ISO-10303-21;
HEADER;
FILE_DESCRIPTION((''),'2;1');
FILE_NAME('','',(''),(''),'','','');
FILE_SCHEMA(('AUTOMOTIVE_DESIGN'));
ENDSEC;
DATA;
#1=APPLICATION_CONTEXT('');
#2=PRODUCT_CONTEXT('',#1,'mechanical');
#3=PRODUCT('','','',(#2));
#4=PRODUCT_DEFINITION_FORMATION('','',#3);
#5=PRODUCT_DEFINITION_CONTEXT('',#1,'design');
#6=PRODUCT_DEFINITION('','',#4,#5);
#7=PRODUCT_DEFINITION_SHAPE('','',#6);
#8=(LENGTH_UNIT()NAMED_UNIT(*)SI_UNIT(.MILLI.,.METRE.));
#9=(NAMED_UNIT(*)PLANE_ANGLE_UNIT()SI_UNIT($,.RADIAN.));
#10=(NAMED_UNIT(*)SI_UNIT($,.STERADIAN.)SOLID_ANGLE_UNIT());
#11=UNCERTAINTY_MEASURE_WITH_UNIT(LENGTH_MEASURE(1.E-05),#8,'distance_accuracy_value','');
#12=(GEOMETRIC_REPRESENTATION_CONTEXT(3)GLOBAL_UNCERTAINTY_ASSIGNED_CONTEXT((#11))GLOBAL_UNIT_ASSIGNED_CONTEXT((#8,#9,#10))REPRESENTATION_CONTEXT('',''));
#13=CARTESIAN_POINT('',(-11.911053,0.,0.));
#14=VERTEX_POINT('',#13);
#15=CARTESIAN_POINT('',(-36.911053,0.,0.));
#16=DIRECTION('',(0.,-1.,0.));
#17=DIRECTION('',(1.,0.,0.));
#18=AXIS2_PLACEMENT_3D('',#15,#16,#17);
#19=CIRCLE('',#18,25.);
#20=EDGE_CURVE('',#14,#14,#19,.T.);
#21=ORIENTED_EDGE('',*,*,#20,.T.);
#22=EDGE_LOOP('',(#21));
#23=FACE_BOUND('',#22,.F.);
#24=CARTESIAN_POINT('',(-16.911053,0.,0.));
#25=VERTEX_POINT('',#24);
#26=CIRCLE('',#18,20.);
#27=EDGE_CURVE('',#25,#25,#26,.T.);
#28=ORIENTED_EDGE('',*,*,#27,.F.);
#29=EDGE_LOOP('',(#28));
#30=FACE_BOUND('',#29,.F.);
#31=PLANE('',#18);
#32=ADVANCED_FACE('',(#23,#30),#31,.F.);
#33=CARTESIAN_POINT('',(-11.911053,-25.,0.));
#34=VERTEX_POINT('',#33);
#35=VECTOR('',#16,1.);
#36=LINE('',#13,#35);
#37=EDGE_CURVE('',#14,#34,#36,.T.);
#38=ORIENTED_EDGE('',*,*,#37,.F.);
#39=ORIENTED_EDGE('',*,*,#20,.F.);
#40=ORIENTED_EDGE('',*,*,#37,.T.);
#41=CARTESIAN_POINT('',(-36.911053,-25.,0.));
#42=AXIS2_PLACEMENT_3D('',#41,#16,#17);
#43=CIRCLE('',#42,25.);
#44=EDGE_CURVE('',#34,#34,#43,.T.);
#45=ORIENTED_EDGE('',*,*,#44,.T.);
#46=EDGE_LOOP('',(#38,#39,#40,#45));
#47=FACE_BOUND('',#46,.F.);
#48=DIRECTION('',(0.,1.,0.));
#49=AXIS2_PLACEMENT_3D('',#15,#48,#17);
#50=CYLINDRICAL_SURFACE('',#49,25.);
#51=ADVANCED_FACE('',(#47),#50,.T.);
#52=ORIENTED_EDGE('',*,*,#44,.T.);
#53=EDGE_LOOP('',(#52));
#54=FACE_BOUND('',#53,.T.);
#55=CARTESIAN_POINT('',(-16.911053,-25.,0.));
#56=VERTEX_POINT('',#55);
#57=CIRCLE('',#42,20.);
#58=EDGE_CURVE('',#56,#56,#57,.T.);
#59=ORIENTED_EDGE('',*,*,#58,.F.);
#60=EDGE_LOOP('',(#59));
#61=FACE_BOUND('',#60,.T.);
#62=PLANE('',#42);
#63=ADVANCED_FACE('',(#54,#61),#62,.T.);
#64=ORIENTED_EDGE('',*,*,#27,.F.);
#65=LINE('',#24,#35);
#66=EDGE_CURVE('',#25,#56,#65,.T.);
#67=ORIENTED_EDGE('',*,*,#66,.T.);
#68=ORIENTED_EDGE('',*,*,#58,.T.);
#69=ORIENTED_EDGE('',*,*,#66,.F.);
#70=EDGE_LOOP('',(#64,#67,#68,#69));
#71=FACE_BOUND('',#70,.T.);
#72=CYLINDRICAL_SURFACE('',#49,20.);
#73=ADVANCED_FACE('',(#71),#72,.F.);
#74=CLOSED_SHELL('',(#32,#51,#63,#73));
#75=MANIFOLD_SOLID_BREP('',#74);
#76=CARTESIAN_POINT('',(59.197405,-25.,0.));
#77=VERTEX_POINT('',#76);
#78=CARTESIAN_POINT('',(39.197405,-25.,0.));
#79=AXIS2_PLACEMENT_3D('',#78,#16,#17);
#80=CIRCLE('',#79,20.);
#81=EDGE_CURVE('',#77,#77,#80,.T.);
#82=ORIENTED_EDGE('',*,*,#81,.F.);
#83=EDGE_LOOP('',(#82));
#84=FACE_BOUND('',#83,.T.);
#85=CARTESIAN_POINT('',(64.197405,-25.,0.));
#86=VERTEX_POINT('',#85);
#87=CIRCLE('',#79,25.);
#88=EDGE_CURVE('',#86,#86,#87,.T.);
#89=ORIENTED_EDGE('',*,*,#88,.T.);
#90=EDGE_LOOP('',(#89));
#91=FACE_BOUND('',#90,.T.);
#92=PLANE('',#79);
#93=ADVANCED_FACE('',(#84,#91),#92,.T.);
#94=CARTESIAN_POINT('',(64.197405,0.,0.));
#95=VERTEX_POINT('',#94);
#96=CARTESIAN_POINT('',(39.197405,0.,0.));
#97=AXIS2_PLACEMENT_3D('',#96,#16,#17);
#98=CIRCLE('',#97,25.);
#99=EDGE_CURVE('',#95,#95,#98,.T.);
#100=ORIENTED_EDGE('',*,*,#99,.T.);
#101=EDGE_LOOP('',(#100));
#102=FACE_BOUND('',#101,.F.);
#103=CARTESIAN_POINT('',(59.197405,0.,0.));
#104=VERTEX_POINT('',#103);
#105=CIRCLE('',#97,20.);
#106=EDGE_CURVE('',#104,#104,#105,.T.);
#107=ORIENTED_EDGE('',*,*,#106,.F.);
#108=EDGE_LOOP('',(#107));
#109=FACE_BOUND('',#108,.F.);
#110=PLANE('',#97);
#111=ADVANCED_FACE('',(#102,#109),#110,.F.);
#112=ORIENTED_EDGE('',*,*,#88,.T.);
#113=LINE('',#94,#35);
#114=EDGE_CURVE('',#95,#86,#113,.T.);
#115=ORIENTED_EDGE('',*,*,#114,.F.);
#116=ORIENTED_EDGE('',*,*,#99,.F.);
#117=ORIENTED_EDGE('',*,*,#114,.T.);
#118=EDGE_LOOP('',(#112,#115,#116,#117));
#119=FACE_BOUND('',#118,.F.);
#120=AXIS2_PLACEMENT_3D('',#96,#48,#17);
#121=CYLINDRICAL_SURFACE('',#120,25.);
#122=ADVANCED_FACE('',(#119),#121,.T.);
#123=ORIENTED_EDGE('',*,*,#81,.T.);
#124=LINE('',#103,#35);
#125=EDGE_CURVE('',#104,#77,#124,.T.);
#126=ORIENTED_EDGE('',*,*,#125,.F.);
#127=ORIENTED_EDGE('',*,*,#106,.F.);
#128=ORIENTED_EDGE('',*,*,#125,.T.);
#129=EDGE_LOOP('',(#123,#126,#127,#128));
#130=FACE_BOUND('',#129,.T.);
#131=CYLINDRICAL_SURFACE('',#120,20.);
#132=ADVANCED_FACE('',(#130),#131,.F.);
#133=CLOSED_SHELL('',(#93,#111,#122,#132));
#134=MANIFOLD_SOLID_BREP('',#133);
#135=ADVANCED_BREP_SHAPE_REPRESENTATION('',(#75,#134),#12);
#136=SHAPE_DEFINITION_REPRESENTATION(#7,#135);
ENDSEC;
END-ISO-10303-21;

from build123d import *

# Parameters (mm, degrees)
F0_R     = 25
F0_R_2   = 20
F1_DEPTH = 25


# Not quite as in the source:
# - the program builds the solid bodies; features that only make, move or delete a surface that nothing else refers to are left out


with BuildPart() as f1:
    # F0 (on Front) → F1 (new body)
    with BuildSketch(Plane.XZ):
        with Locations((-36.9110533473, 0)):
            Circle(F0_R)
        with Locations((-36.9110533473, 0)):
            Circle(F0_R_2, mode=Mode.SUBTRACT)
    extrude(amount=F1_DEPTH)


with BuildPart() as f1b:
    # F0 (on Front) → F1, piece 2 (new body)
    with BuildSketch(Plane.XZ):
        with Locations((39.197404974, 0)):
            Circle(F0_R)
        with Locations((39.197404974, 0)):
            Circle(F0_R_2, mode=Mode.SUBTRACT)
    extrude(amount=F1_DEPTH)


solid = Compound([f1.part, f1b.part])
